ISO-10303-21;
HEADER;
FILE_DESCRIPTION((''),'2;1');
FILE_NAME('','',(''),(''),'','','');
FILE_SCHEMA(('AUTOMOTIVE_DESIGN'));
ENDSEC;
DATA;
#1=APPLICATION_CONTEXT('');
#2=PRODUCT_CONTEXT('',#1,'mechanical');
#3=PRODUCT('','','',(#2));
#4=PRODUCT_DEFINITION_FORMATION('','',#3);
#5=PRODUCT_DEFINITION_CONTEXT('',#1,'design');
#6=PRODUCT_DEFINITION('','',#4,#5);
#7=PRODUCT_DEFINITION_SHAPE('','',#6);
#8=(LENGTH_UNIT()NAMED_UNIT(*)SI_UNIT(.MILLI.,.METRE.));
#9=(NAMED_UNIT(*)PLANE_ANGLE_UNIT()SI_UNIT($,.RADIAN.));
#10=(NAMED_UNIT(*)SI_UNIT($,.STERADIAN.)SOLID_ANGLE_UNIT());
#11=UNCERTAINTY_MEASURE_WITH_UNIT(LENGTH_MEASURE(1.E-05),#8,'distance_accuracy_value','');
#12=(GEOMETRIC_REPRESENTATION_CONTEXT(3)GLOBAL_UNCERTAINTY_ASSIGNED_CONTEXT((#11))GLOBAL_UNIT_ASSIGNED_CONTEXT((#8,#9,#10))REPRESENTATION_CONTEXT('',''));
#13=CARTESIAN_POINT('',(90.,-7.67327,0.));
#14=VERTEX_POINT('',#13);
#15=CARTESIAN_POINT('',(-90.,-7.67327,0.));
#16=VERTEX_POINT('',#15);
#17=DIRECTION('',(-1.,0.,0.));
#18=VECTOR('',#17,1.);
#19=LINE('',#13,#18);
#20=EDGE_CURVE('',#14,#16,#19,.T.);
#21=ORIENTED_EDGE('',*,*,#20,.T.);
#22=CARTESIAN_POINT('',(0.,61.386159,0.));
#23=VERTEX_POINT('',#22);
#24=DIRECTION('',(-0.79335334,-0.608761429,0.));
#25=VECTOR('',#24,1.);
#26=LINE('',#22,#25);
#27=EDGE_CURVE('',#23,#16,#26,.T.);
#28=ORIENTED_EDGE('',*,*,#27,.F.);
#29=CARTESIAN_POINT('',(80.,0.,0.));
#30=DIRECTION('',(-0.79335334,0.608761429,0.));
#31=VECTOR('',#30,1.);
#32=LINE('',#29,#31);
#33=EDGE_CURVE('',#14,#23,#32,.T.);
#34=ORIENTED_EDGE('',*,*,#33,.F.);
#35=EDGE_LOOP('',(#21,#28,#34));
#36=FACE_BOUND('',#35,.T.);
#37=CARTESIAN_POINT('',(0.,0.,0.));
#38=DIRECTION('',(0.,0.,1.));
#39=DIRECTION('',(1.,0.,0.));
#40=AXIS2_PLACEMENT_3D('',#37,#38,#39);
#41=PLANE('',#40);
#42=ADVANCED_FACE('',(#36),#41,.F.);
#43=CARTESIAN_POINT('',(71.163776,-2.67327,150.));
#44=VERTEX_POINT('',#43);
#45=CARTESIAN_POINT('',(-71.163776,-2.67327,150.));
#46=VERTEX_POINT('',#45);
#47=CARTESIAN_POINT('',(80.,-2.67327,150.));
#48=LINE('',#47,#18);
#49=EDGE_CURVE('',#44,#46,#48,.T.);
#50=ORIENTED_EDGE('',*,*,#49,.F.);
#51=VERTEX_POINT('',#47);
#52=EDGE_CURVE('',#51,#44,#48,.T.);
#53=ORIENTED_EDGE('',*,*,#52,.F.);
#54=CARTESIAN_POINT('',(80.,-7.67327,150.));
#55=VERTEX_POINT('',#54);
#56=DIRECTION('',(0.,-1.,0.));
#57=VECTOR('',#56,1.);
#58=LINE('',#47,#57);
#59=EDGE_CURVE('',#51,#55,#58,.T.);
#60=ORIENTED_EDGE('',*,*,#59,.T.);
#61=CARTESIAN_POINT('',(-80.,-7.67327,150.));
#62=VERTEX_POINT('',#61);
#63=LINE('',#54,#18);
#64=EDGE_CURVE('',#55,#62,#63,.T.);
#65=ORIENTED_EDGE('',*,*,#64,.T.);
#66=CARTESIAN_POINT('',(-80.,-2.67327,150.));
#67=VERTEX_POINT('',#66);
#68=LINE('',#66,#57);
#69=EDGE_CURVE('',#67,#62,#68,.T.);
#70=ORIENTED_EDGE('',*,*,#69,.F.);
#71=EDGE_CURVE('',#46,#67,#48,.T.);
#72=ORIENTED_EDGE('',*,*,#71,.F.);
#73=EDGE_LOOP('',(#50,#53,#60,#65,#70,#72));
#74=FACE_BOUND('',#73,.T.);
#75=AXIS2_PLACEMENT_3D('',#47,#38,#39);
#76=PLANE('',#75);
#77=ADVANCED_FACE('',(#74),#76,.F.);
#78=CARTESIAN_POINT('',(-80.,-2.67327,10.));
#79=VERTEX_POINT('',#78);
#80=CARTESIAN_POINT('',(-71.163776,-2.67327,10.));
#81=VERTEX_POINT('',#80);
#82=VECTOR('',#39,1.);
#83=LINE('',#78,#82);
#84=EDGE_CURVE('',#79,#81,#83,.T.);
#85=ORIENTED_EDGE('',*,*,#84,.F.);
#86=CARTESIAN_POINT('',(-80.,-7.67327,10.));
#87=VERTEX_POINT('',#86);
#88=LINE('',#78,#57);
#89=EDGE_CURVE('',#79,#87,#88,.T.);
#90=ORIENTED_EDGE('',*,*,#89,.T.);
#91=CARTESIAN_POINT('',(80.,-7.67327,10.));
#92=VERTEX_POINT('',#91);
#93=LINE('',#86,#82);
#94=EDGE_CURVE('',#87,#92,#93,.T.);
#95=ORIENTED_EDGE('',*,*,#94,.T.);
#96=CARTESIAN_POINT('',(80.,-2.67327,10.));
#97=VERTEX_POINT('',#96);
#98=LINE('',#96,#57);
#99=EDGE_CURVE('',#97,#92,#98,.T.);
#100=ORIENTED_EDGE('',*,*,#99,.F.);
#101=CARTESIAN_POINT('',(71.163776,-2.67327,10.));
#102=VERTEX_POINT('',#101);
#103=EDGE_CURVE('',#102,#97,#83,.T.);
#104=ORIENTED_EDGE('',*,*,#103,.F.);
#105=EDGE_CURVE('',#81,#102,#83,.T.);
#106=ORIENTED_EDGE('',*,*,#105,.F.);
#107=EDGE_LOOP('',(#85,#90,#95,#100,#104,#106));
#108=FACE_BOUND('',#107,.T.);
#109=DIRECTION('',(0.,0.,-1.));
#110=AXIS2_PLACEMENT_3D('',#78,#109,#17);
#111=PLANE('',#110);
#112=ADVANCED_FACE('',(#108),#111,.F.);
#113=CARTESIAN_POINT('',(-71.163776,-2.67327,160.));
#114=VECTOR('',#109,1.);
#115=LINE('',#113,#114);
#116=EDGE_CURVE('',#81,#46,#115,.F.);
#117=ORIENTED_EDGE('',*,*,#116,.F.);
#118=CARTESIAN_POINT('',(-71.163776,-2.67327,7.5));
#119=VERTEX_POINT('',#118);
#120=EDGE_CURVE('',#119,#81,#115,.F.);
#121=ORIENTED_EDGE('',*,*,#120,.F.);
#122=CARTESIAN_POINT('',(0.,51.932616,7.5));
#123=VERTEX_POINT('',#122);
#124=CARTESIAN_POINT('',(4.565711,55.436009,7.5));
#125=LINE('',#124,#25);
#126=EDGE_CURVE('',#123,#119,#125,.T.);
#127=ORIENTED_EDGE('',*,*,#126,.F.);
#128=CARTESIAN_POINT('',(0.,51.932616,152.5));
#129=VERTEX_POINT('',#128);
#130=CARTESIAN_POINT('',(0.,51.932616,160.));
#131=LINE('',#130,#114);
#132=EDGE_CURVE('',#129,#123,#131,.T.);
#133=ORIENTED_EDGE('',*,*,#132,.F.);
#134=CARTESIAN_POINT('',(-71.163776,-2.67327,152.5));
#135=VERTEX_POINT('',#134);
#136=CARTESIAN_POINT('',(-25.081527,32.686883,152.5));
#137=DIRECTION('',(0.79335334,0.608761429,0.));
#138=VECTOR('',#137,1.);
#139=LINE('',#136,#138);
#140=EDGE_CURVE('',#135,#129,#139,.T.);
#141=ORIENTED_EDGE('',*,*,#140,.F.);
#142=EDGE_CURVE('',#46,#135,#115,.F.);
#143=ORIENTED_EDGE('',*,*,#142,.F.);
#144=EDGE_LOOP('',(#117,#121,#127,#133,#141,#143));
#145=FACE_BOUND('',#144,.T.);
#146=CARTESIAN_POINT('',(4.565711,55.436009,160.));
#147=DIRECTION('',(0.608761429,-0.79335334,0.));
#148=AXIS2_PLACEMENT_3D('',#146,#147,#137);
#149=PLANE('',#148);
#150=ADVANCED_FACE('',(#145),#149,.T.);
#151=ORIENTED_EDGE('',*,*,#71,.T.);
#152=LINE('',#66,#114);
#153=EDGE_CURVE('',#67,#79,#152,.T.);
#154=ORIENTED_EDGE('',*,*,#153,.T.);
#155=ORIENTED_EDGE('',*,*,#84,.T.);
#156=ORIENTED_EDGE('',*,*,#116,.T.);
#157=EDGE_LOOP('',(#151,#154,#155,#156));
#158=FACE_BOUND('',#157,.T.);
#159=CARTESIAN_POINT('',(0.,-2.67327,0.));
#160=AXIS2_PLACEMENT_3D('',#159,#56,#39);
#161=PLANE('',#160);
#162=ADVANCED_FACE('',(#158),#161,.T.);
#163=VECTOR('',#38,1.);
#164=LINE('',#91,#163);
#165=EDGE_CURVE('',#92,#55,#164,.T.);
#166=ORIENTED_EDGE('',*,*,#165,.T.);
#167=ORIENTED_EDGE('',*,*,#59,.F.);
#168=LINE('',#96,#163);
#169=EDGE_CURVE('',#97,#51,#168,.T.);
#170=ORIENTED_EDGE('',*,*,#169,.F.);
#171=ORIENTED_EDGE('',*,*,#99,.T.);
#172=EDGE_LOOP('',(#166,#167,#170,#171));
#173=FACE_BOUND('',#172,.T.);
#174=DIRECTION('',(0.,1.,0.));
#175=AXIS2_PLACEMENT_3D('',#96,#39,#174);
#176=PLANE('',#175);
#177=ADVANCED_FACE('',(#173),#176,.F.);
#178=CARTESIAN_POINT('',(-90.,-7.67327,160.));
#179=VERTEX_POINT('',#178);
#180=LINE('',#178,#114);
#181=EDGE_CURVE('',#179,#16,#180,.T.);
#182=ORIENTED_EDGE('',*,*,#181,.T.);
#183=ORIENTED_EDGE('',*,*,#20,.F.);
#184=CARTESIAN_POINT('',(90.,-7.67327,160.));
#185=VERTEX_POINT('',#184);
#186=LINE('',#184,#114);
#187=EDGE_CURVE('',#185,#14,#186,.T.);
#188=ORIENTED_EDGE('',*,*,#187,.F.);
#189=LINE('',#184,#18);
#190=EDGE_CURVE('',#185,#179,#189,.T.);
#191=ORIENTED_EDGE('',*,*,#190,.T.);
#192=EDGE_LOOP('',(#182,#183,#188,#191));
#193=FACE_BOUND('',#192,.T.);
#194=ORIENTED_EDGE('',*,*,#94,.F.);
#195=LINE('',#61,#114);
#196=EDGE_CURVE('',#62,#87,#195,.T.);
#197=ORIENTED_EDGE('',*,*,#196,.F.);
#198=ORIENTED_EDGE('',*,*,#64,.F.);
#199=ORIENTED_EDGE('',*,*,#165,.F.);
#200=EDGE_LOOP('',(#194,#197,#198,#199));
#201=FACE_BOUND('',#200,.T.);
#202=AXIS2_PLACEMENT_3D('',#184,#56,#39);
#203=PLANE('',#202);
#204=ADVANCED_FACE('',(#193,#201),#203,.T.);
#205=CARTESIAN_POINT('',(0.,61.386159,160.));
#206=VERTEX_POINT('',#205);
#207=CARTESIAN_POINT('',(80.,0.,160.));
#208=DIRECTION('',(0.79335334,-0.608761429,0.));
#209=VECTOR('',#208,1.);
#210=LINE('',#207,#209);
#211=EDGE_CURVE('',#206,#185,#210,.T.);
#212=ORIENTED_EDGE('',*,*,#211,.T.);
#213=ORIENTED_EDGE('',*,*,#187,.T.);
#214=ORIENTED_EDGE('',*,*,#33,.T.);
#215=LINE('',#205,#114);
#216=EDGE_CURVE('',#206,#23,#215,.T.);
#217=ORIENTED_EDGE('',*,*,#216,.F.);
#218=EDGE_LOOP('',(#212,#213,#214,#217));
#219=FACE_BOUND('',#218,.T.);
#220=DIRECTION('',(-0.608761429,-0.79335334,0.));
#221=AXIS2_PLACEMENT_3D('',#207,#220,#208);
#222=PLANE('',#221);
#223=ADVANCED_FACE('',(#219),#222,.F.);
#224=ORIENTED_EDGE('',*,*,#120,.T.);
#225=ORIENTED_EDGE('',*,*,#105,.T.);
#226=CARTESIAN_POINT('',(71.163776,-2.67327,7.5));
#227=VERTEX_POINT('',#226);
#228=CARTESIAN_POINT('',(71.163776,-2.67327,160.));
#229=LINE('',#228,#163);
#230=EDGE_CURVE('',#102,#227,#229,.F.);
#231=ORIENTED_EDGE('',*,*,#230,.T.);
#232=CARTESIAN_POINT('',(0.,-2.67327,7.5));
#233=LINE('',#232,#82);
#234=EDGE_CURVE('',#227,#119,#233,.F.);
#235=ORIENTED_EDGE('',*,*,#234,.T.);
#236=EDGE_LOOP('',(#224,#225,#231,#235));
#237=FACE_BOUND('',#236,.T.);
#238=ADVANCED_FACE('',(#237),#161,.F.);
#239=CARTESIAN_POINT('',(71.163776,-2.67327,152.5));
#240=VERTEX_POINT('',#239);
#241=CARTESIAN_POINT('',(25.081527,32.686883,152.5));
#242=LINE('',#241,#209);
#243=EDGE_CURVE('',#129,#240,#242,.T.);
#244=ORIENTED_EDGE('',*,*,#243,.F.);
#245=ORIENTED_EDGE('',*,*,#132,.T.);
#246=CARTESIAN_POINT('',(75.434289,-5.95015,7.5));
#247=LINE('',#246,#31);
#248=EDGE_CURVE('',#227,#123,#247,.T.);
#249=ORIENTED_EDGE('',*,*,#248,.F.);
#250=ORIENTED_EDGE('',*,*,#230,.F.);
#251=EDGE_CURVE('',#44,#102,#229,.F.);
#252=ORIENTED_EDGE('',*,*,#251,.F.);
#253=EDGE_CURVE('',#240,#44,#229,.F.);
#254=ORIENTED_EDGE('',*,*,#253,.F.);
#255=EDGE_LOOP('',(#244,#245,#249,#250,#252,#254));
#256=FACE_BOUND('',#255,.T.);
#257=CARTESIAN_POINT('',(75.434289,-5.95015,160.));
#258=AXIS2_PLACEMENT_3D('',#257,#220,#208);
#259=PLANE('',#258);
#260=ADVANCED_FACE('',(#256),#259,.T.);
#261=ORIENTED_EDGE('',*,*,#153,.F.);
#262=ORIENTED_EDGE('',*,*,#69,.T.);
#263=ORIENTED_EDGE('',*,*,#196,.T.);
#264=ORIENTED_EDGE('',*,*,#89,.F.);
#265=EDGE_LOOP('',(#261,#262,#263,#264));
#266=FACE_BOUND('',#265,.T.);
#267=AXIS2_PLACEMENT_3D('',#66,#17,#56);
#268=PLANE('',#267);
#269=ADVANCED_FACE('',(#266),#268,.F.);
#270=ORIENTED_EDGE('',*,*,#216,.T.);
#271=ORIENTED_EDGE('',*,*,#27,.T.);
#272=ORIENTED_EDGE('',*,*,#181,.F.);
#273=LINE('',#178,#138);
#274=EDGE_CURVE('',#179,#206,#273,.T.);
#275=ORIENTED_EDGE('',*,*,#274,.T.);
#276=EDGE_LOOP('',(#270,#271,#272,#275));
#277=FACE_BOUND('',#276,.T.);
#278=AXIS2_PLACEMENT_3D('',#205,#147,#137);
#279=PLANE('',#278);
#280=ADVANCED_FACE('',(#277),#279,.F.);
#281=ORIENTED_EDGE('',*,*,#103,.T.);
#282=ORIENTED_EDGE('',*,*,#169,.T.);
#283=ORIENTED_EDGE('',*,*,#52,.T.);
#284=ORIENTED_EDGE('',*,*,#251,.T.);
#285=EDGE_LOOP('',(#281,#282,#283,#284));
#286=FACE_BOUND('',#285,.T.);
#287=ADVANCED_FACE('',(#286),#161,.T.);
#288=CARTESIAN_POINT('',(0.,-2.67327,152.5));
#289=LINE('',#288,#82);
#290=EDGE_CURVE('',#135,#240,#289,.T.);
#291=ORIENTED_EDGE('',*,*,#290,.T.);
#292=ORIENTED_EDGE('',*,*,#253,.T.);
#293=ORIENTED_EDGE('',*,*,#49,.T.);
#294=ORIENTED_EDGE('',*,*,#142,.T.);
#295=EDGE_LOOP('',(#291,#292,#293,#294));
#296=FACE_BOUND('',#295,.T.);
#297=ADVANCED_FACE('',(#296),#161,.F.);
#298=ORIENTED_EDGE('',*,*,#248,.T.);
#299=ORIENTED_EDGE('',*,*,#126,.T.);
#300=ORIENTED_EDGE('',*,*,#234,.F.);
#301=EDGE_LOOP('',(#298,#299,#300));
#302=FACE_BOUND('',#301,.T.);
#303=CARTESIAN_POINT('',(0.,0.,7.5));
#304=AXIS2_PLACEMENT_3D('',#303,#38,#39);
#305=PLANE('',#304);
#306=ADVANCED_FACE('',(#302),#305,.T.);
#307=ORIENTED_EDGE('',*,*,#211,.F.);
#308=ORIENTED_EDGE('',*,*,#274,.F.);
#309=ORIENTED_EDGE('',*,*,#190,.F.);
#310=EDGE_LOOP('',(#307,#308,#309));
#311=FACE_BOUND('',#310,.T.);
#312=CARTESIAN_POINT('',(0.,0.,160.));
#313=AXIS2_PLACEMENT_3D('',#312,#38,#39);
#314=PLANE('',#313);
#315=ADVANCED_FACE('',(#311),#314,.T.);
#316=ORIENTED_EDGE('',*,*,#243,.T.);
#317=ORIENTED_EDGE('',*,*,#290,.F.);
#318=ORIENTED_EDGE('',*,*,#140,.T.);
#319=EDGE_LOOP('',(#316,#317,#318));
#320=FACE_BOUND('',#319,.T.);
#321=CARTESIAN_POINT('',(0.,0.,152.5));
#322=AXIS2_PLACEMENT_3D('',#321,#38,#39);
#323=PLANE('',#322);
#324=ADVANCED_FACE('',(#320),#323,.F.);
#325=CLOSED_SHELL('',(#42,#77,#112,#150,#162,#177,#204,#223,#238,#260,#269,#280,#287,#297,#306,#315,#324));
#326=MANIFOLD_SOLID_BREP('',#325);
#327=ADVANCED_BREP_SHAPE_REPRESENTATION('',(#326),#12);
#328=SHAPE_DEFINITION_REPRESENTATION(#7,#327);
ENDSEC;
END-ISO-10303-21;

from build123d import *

# Parameters (mm, degrees)
BOSS_EXTRUDE1_DEPTH = 160
SKETCH2_W           = 160
SKETCH2_H           = 140
CUT_EXTRUDE1_DEPTH  = 5
SHELL1_START        = 7.5
SHELL1_DEPTH        = 145


# Read off the part's stored shape, not the designer's step: Shell1
with BuildPart() as part:
    # Sketch1 → Boss-Extrude1 (new body)
    with BuildSketch(Plane.XY):
        Polygon((0, 61.386159038), (-80, 0), (-90, -7.67326988), (90, -7.67326988), (80, 0), align=None)
    extrude(amount=BOSS_EXTRUDE1_DEPTH)

    # Sketch2 → Cut-Extrude1 (cut)
    with BuildSketch(Plane.XZ.offset(7.67326988)):
        with Locations((0, 80)):
            Rectangle(SKETCH2_W, SKETCH2_H)
    extrude(amount=-CUT_EXTRUDE1_DEPTH, mode=Mode.SUBTRACT)

    # Shell1 outline → Shell1 (cut)
    with BuildSketch(Plane.XY.offset(SHELL1_START)):
        Polygon((0, 51.932615933), (-71.163775898, -2.67326988), (71.163775898, -2.67326988), align=None)
    extrude(amount=SHELL1_DEPTH, mode=Mode.SUBTRACT)


solid = part.part
